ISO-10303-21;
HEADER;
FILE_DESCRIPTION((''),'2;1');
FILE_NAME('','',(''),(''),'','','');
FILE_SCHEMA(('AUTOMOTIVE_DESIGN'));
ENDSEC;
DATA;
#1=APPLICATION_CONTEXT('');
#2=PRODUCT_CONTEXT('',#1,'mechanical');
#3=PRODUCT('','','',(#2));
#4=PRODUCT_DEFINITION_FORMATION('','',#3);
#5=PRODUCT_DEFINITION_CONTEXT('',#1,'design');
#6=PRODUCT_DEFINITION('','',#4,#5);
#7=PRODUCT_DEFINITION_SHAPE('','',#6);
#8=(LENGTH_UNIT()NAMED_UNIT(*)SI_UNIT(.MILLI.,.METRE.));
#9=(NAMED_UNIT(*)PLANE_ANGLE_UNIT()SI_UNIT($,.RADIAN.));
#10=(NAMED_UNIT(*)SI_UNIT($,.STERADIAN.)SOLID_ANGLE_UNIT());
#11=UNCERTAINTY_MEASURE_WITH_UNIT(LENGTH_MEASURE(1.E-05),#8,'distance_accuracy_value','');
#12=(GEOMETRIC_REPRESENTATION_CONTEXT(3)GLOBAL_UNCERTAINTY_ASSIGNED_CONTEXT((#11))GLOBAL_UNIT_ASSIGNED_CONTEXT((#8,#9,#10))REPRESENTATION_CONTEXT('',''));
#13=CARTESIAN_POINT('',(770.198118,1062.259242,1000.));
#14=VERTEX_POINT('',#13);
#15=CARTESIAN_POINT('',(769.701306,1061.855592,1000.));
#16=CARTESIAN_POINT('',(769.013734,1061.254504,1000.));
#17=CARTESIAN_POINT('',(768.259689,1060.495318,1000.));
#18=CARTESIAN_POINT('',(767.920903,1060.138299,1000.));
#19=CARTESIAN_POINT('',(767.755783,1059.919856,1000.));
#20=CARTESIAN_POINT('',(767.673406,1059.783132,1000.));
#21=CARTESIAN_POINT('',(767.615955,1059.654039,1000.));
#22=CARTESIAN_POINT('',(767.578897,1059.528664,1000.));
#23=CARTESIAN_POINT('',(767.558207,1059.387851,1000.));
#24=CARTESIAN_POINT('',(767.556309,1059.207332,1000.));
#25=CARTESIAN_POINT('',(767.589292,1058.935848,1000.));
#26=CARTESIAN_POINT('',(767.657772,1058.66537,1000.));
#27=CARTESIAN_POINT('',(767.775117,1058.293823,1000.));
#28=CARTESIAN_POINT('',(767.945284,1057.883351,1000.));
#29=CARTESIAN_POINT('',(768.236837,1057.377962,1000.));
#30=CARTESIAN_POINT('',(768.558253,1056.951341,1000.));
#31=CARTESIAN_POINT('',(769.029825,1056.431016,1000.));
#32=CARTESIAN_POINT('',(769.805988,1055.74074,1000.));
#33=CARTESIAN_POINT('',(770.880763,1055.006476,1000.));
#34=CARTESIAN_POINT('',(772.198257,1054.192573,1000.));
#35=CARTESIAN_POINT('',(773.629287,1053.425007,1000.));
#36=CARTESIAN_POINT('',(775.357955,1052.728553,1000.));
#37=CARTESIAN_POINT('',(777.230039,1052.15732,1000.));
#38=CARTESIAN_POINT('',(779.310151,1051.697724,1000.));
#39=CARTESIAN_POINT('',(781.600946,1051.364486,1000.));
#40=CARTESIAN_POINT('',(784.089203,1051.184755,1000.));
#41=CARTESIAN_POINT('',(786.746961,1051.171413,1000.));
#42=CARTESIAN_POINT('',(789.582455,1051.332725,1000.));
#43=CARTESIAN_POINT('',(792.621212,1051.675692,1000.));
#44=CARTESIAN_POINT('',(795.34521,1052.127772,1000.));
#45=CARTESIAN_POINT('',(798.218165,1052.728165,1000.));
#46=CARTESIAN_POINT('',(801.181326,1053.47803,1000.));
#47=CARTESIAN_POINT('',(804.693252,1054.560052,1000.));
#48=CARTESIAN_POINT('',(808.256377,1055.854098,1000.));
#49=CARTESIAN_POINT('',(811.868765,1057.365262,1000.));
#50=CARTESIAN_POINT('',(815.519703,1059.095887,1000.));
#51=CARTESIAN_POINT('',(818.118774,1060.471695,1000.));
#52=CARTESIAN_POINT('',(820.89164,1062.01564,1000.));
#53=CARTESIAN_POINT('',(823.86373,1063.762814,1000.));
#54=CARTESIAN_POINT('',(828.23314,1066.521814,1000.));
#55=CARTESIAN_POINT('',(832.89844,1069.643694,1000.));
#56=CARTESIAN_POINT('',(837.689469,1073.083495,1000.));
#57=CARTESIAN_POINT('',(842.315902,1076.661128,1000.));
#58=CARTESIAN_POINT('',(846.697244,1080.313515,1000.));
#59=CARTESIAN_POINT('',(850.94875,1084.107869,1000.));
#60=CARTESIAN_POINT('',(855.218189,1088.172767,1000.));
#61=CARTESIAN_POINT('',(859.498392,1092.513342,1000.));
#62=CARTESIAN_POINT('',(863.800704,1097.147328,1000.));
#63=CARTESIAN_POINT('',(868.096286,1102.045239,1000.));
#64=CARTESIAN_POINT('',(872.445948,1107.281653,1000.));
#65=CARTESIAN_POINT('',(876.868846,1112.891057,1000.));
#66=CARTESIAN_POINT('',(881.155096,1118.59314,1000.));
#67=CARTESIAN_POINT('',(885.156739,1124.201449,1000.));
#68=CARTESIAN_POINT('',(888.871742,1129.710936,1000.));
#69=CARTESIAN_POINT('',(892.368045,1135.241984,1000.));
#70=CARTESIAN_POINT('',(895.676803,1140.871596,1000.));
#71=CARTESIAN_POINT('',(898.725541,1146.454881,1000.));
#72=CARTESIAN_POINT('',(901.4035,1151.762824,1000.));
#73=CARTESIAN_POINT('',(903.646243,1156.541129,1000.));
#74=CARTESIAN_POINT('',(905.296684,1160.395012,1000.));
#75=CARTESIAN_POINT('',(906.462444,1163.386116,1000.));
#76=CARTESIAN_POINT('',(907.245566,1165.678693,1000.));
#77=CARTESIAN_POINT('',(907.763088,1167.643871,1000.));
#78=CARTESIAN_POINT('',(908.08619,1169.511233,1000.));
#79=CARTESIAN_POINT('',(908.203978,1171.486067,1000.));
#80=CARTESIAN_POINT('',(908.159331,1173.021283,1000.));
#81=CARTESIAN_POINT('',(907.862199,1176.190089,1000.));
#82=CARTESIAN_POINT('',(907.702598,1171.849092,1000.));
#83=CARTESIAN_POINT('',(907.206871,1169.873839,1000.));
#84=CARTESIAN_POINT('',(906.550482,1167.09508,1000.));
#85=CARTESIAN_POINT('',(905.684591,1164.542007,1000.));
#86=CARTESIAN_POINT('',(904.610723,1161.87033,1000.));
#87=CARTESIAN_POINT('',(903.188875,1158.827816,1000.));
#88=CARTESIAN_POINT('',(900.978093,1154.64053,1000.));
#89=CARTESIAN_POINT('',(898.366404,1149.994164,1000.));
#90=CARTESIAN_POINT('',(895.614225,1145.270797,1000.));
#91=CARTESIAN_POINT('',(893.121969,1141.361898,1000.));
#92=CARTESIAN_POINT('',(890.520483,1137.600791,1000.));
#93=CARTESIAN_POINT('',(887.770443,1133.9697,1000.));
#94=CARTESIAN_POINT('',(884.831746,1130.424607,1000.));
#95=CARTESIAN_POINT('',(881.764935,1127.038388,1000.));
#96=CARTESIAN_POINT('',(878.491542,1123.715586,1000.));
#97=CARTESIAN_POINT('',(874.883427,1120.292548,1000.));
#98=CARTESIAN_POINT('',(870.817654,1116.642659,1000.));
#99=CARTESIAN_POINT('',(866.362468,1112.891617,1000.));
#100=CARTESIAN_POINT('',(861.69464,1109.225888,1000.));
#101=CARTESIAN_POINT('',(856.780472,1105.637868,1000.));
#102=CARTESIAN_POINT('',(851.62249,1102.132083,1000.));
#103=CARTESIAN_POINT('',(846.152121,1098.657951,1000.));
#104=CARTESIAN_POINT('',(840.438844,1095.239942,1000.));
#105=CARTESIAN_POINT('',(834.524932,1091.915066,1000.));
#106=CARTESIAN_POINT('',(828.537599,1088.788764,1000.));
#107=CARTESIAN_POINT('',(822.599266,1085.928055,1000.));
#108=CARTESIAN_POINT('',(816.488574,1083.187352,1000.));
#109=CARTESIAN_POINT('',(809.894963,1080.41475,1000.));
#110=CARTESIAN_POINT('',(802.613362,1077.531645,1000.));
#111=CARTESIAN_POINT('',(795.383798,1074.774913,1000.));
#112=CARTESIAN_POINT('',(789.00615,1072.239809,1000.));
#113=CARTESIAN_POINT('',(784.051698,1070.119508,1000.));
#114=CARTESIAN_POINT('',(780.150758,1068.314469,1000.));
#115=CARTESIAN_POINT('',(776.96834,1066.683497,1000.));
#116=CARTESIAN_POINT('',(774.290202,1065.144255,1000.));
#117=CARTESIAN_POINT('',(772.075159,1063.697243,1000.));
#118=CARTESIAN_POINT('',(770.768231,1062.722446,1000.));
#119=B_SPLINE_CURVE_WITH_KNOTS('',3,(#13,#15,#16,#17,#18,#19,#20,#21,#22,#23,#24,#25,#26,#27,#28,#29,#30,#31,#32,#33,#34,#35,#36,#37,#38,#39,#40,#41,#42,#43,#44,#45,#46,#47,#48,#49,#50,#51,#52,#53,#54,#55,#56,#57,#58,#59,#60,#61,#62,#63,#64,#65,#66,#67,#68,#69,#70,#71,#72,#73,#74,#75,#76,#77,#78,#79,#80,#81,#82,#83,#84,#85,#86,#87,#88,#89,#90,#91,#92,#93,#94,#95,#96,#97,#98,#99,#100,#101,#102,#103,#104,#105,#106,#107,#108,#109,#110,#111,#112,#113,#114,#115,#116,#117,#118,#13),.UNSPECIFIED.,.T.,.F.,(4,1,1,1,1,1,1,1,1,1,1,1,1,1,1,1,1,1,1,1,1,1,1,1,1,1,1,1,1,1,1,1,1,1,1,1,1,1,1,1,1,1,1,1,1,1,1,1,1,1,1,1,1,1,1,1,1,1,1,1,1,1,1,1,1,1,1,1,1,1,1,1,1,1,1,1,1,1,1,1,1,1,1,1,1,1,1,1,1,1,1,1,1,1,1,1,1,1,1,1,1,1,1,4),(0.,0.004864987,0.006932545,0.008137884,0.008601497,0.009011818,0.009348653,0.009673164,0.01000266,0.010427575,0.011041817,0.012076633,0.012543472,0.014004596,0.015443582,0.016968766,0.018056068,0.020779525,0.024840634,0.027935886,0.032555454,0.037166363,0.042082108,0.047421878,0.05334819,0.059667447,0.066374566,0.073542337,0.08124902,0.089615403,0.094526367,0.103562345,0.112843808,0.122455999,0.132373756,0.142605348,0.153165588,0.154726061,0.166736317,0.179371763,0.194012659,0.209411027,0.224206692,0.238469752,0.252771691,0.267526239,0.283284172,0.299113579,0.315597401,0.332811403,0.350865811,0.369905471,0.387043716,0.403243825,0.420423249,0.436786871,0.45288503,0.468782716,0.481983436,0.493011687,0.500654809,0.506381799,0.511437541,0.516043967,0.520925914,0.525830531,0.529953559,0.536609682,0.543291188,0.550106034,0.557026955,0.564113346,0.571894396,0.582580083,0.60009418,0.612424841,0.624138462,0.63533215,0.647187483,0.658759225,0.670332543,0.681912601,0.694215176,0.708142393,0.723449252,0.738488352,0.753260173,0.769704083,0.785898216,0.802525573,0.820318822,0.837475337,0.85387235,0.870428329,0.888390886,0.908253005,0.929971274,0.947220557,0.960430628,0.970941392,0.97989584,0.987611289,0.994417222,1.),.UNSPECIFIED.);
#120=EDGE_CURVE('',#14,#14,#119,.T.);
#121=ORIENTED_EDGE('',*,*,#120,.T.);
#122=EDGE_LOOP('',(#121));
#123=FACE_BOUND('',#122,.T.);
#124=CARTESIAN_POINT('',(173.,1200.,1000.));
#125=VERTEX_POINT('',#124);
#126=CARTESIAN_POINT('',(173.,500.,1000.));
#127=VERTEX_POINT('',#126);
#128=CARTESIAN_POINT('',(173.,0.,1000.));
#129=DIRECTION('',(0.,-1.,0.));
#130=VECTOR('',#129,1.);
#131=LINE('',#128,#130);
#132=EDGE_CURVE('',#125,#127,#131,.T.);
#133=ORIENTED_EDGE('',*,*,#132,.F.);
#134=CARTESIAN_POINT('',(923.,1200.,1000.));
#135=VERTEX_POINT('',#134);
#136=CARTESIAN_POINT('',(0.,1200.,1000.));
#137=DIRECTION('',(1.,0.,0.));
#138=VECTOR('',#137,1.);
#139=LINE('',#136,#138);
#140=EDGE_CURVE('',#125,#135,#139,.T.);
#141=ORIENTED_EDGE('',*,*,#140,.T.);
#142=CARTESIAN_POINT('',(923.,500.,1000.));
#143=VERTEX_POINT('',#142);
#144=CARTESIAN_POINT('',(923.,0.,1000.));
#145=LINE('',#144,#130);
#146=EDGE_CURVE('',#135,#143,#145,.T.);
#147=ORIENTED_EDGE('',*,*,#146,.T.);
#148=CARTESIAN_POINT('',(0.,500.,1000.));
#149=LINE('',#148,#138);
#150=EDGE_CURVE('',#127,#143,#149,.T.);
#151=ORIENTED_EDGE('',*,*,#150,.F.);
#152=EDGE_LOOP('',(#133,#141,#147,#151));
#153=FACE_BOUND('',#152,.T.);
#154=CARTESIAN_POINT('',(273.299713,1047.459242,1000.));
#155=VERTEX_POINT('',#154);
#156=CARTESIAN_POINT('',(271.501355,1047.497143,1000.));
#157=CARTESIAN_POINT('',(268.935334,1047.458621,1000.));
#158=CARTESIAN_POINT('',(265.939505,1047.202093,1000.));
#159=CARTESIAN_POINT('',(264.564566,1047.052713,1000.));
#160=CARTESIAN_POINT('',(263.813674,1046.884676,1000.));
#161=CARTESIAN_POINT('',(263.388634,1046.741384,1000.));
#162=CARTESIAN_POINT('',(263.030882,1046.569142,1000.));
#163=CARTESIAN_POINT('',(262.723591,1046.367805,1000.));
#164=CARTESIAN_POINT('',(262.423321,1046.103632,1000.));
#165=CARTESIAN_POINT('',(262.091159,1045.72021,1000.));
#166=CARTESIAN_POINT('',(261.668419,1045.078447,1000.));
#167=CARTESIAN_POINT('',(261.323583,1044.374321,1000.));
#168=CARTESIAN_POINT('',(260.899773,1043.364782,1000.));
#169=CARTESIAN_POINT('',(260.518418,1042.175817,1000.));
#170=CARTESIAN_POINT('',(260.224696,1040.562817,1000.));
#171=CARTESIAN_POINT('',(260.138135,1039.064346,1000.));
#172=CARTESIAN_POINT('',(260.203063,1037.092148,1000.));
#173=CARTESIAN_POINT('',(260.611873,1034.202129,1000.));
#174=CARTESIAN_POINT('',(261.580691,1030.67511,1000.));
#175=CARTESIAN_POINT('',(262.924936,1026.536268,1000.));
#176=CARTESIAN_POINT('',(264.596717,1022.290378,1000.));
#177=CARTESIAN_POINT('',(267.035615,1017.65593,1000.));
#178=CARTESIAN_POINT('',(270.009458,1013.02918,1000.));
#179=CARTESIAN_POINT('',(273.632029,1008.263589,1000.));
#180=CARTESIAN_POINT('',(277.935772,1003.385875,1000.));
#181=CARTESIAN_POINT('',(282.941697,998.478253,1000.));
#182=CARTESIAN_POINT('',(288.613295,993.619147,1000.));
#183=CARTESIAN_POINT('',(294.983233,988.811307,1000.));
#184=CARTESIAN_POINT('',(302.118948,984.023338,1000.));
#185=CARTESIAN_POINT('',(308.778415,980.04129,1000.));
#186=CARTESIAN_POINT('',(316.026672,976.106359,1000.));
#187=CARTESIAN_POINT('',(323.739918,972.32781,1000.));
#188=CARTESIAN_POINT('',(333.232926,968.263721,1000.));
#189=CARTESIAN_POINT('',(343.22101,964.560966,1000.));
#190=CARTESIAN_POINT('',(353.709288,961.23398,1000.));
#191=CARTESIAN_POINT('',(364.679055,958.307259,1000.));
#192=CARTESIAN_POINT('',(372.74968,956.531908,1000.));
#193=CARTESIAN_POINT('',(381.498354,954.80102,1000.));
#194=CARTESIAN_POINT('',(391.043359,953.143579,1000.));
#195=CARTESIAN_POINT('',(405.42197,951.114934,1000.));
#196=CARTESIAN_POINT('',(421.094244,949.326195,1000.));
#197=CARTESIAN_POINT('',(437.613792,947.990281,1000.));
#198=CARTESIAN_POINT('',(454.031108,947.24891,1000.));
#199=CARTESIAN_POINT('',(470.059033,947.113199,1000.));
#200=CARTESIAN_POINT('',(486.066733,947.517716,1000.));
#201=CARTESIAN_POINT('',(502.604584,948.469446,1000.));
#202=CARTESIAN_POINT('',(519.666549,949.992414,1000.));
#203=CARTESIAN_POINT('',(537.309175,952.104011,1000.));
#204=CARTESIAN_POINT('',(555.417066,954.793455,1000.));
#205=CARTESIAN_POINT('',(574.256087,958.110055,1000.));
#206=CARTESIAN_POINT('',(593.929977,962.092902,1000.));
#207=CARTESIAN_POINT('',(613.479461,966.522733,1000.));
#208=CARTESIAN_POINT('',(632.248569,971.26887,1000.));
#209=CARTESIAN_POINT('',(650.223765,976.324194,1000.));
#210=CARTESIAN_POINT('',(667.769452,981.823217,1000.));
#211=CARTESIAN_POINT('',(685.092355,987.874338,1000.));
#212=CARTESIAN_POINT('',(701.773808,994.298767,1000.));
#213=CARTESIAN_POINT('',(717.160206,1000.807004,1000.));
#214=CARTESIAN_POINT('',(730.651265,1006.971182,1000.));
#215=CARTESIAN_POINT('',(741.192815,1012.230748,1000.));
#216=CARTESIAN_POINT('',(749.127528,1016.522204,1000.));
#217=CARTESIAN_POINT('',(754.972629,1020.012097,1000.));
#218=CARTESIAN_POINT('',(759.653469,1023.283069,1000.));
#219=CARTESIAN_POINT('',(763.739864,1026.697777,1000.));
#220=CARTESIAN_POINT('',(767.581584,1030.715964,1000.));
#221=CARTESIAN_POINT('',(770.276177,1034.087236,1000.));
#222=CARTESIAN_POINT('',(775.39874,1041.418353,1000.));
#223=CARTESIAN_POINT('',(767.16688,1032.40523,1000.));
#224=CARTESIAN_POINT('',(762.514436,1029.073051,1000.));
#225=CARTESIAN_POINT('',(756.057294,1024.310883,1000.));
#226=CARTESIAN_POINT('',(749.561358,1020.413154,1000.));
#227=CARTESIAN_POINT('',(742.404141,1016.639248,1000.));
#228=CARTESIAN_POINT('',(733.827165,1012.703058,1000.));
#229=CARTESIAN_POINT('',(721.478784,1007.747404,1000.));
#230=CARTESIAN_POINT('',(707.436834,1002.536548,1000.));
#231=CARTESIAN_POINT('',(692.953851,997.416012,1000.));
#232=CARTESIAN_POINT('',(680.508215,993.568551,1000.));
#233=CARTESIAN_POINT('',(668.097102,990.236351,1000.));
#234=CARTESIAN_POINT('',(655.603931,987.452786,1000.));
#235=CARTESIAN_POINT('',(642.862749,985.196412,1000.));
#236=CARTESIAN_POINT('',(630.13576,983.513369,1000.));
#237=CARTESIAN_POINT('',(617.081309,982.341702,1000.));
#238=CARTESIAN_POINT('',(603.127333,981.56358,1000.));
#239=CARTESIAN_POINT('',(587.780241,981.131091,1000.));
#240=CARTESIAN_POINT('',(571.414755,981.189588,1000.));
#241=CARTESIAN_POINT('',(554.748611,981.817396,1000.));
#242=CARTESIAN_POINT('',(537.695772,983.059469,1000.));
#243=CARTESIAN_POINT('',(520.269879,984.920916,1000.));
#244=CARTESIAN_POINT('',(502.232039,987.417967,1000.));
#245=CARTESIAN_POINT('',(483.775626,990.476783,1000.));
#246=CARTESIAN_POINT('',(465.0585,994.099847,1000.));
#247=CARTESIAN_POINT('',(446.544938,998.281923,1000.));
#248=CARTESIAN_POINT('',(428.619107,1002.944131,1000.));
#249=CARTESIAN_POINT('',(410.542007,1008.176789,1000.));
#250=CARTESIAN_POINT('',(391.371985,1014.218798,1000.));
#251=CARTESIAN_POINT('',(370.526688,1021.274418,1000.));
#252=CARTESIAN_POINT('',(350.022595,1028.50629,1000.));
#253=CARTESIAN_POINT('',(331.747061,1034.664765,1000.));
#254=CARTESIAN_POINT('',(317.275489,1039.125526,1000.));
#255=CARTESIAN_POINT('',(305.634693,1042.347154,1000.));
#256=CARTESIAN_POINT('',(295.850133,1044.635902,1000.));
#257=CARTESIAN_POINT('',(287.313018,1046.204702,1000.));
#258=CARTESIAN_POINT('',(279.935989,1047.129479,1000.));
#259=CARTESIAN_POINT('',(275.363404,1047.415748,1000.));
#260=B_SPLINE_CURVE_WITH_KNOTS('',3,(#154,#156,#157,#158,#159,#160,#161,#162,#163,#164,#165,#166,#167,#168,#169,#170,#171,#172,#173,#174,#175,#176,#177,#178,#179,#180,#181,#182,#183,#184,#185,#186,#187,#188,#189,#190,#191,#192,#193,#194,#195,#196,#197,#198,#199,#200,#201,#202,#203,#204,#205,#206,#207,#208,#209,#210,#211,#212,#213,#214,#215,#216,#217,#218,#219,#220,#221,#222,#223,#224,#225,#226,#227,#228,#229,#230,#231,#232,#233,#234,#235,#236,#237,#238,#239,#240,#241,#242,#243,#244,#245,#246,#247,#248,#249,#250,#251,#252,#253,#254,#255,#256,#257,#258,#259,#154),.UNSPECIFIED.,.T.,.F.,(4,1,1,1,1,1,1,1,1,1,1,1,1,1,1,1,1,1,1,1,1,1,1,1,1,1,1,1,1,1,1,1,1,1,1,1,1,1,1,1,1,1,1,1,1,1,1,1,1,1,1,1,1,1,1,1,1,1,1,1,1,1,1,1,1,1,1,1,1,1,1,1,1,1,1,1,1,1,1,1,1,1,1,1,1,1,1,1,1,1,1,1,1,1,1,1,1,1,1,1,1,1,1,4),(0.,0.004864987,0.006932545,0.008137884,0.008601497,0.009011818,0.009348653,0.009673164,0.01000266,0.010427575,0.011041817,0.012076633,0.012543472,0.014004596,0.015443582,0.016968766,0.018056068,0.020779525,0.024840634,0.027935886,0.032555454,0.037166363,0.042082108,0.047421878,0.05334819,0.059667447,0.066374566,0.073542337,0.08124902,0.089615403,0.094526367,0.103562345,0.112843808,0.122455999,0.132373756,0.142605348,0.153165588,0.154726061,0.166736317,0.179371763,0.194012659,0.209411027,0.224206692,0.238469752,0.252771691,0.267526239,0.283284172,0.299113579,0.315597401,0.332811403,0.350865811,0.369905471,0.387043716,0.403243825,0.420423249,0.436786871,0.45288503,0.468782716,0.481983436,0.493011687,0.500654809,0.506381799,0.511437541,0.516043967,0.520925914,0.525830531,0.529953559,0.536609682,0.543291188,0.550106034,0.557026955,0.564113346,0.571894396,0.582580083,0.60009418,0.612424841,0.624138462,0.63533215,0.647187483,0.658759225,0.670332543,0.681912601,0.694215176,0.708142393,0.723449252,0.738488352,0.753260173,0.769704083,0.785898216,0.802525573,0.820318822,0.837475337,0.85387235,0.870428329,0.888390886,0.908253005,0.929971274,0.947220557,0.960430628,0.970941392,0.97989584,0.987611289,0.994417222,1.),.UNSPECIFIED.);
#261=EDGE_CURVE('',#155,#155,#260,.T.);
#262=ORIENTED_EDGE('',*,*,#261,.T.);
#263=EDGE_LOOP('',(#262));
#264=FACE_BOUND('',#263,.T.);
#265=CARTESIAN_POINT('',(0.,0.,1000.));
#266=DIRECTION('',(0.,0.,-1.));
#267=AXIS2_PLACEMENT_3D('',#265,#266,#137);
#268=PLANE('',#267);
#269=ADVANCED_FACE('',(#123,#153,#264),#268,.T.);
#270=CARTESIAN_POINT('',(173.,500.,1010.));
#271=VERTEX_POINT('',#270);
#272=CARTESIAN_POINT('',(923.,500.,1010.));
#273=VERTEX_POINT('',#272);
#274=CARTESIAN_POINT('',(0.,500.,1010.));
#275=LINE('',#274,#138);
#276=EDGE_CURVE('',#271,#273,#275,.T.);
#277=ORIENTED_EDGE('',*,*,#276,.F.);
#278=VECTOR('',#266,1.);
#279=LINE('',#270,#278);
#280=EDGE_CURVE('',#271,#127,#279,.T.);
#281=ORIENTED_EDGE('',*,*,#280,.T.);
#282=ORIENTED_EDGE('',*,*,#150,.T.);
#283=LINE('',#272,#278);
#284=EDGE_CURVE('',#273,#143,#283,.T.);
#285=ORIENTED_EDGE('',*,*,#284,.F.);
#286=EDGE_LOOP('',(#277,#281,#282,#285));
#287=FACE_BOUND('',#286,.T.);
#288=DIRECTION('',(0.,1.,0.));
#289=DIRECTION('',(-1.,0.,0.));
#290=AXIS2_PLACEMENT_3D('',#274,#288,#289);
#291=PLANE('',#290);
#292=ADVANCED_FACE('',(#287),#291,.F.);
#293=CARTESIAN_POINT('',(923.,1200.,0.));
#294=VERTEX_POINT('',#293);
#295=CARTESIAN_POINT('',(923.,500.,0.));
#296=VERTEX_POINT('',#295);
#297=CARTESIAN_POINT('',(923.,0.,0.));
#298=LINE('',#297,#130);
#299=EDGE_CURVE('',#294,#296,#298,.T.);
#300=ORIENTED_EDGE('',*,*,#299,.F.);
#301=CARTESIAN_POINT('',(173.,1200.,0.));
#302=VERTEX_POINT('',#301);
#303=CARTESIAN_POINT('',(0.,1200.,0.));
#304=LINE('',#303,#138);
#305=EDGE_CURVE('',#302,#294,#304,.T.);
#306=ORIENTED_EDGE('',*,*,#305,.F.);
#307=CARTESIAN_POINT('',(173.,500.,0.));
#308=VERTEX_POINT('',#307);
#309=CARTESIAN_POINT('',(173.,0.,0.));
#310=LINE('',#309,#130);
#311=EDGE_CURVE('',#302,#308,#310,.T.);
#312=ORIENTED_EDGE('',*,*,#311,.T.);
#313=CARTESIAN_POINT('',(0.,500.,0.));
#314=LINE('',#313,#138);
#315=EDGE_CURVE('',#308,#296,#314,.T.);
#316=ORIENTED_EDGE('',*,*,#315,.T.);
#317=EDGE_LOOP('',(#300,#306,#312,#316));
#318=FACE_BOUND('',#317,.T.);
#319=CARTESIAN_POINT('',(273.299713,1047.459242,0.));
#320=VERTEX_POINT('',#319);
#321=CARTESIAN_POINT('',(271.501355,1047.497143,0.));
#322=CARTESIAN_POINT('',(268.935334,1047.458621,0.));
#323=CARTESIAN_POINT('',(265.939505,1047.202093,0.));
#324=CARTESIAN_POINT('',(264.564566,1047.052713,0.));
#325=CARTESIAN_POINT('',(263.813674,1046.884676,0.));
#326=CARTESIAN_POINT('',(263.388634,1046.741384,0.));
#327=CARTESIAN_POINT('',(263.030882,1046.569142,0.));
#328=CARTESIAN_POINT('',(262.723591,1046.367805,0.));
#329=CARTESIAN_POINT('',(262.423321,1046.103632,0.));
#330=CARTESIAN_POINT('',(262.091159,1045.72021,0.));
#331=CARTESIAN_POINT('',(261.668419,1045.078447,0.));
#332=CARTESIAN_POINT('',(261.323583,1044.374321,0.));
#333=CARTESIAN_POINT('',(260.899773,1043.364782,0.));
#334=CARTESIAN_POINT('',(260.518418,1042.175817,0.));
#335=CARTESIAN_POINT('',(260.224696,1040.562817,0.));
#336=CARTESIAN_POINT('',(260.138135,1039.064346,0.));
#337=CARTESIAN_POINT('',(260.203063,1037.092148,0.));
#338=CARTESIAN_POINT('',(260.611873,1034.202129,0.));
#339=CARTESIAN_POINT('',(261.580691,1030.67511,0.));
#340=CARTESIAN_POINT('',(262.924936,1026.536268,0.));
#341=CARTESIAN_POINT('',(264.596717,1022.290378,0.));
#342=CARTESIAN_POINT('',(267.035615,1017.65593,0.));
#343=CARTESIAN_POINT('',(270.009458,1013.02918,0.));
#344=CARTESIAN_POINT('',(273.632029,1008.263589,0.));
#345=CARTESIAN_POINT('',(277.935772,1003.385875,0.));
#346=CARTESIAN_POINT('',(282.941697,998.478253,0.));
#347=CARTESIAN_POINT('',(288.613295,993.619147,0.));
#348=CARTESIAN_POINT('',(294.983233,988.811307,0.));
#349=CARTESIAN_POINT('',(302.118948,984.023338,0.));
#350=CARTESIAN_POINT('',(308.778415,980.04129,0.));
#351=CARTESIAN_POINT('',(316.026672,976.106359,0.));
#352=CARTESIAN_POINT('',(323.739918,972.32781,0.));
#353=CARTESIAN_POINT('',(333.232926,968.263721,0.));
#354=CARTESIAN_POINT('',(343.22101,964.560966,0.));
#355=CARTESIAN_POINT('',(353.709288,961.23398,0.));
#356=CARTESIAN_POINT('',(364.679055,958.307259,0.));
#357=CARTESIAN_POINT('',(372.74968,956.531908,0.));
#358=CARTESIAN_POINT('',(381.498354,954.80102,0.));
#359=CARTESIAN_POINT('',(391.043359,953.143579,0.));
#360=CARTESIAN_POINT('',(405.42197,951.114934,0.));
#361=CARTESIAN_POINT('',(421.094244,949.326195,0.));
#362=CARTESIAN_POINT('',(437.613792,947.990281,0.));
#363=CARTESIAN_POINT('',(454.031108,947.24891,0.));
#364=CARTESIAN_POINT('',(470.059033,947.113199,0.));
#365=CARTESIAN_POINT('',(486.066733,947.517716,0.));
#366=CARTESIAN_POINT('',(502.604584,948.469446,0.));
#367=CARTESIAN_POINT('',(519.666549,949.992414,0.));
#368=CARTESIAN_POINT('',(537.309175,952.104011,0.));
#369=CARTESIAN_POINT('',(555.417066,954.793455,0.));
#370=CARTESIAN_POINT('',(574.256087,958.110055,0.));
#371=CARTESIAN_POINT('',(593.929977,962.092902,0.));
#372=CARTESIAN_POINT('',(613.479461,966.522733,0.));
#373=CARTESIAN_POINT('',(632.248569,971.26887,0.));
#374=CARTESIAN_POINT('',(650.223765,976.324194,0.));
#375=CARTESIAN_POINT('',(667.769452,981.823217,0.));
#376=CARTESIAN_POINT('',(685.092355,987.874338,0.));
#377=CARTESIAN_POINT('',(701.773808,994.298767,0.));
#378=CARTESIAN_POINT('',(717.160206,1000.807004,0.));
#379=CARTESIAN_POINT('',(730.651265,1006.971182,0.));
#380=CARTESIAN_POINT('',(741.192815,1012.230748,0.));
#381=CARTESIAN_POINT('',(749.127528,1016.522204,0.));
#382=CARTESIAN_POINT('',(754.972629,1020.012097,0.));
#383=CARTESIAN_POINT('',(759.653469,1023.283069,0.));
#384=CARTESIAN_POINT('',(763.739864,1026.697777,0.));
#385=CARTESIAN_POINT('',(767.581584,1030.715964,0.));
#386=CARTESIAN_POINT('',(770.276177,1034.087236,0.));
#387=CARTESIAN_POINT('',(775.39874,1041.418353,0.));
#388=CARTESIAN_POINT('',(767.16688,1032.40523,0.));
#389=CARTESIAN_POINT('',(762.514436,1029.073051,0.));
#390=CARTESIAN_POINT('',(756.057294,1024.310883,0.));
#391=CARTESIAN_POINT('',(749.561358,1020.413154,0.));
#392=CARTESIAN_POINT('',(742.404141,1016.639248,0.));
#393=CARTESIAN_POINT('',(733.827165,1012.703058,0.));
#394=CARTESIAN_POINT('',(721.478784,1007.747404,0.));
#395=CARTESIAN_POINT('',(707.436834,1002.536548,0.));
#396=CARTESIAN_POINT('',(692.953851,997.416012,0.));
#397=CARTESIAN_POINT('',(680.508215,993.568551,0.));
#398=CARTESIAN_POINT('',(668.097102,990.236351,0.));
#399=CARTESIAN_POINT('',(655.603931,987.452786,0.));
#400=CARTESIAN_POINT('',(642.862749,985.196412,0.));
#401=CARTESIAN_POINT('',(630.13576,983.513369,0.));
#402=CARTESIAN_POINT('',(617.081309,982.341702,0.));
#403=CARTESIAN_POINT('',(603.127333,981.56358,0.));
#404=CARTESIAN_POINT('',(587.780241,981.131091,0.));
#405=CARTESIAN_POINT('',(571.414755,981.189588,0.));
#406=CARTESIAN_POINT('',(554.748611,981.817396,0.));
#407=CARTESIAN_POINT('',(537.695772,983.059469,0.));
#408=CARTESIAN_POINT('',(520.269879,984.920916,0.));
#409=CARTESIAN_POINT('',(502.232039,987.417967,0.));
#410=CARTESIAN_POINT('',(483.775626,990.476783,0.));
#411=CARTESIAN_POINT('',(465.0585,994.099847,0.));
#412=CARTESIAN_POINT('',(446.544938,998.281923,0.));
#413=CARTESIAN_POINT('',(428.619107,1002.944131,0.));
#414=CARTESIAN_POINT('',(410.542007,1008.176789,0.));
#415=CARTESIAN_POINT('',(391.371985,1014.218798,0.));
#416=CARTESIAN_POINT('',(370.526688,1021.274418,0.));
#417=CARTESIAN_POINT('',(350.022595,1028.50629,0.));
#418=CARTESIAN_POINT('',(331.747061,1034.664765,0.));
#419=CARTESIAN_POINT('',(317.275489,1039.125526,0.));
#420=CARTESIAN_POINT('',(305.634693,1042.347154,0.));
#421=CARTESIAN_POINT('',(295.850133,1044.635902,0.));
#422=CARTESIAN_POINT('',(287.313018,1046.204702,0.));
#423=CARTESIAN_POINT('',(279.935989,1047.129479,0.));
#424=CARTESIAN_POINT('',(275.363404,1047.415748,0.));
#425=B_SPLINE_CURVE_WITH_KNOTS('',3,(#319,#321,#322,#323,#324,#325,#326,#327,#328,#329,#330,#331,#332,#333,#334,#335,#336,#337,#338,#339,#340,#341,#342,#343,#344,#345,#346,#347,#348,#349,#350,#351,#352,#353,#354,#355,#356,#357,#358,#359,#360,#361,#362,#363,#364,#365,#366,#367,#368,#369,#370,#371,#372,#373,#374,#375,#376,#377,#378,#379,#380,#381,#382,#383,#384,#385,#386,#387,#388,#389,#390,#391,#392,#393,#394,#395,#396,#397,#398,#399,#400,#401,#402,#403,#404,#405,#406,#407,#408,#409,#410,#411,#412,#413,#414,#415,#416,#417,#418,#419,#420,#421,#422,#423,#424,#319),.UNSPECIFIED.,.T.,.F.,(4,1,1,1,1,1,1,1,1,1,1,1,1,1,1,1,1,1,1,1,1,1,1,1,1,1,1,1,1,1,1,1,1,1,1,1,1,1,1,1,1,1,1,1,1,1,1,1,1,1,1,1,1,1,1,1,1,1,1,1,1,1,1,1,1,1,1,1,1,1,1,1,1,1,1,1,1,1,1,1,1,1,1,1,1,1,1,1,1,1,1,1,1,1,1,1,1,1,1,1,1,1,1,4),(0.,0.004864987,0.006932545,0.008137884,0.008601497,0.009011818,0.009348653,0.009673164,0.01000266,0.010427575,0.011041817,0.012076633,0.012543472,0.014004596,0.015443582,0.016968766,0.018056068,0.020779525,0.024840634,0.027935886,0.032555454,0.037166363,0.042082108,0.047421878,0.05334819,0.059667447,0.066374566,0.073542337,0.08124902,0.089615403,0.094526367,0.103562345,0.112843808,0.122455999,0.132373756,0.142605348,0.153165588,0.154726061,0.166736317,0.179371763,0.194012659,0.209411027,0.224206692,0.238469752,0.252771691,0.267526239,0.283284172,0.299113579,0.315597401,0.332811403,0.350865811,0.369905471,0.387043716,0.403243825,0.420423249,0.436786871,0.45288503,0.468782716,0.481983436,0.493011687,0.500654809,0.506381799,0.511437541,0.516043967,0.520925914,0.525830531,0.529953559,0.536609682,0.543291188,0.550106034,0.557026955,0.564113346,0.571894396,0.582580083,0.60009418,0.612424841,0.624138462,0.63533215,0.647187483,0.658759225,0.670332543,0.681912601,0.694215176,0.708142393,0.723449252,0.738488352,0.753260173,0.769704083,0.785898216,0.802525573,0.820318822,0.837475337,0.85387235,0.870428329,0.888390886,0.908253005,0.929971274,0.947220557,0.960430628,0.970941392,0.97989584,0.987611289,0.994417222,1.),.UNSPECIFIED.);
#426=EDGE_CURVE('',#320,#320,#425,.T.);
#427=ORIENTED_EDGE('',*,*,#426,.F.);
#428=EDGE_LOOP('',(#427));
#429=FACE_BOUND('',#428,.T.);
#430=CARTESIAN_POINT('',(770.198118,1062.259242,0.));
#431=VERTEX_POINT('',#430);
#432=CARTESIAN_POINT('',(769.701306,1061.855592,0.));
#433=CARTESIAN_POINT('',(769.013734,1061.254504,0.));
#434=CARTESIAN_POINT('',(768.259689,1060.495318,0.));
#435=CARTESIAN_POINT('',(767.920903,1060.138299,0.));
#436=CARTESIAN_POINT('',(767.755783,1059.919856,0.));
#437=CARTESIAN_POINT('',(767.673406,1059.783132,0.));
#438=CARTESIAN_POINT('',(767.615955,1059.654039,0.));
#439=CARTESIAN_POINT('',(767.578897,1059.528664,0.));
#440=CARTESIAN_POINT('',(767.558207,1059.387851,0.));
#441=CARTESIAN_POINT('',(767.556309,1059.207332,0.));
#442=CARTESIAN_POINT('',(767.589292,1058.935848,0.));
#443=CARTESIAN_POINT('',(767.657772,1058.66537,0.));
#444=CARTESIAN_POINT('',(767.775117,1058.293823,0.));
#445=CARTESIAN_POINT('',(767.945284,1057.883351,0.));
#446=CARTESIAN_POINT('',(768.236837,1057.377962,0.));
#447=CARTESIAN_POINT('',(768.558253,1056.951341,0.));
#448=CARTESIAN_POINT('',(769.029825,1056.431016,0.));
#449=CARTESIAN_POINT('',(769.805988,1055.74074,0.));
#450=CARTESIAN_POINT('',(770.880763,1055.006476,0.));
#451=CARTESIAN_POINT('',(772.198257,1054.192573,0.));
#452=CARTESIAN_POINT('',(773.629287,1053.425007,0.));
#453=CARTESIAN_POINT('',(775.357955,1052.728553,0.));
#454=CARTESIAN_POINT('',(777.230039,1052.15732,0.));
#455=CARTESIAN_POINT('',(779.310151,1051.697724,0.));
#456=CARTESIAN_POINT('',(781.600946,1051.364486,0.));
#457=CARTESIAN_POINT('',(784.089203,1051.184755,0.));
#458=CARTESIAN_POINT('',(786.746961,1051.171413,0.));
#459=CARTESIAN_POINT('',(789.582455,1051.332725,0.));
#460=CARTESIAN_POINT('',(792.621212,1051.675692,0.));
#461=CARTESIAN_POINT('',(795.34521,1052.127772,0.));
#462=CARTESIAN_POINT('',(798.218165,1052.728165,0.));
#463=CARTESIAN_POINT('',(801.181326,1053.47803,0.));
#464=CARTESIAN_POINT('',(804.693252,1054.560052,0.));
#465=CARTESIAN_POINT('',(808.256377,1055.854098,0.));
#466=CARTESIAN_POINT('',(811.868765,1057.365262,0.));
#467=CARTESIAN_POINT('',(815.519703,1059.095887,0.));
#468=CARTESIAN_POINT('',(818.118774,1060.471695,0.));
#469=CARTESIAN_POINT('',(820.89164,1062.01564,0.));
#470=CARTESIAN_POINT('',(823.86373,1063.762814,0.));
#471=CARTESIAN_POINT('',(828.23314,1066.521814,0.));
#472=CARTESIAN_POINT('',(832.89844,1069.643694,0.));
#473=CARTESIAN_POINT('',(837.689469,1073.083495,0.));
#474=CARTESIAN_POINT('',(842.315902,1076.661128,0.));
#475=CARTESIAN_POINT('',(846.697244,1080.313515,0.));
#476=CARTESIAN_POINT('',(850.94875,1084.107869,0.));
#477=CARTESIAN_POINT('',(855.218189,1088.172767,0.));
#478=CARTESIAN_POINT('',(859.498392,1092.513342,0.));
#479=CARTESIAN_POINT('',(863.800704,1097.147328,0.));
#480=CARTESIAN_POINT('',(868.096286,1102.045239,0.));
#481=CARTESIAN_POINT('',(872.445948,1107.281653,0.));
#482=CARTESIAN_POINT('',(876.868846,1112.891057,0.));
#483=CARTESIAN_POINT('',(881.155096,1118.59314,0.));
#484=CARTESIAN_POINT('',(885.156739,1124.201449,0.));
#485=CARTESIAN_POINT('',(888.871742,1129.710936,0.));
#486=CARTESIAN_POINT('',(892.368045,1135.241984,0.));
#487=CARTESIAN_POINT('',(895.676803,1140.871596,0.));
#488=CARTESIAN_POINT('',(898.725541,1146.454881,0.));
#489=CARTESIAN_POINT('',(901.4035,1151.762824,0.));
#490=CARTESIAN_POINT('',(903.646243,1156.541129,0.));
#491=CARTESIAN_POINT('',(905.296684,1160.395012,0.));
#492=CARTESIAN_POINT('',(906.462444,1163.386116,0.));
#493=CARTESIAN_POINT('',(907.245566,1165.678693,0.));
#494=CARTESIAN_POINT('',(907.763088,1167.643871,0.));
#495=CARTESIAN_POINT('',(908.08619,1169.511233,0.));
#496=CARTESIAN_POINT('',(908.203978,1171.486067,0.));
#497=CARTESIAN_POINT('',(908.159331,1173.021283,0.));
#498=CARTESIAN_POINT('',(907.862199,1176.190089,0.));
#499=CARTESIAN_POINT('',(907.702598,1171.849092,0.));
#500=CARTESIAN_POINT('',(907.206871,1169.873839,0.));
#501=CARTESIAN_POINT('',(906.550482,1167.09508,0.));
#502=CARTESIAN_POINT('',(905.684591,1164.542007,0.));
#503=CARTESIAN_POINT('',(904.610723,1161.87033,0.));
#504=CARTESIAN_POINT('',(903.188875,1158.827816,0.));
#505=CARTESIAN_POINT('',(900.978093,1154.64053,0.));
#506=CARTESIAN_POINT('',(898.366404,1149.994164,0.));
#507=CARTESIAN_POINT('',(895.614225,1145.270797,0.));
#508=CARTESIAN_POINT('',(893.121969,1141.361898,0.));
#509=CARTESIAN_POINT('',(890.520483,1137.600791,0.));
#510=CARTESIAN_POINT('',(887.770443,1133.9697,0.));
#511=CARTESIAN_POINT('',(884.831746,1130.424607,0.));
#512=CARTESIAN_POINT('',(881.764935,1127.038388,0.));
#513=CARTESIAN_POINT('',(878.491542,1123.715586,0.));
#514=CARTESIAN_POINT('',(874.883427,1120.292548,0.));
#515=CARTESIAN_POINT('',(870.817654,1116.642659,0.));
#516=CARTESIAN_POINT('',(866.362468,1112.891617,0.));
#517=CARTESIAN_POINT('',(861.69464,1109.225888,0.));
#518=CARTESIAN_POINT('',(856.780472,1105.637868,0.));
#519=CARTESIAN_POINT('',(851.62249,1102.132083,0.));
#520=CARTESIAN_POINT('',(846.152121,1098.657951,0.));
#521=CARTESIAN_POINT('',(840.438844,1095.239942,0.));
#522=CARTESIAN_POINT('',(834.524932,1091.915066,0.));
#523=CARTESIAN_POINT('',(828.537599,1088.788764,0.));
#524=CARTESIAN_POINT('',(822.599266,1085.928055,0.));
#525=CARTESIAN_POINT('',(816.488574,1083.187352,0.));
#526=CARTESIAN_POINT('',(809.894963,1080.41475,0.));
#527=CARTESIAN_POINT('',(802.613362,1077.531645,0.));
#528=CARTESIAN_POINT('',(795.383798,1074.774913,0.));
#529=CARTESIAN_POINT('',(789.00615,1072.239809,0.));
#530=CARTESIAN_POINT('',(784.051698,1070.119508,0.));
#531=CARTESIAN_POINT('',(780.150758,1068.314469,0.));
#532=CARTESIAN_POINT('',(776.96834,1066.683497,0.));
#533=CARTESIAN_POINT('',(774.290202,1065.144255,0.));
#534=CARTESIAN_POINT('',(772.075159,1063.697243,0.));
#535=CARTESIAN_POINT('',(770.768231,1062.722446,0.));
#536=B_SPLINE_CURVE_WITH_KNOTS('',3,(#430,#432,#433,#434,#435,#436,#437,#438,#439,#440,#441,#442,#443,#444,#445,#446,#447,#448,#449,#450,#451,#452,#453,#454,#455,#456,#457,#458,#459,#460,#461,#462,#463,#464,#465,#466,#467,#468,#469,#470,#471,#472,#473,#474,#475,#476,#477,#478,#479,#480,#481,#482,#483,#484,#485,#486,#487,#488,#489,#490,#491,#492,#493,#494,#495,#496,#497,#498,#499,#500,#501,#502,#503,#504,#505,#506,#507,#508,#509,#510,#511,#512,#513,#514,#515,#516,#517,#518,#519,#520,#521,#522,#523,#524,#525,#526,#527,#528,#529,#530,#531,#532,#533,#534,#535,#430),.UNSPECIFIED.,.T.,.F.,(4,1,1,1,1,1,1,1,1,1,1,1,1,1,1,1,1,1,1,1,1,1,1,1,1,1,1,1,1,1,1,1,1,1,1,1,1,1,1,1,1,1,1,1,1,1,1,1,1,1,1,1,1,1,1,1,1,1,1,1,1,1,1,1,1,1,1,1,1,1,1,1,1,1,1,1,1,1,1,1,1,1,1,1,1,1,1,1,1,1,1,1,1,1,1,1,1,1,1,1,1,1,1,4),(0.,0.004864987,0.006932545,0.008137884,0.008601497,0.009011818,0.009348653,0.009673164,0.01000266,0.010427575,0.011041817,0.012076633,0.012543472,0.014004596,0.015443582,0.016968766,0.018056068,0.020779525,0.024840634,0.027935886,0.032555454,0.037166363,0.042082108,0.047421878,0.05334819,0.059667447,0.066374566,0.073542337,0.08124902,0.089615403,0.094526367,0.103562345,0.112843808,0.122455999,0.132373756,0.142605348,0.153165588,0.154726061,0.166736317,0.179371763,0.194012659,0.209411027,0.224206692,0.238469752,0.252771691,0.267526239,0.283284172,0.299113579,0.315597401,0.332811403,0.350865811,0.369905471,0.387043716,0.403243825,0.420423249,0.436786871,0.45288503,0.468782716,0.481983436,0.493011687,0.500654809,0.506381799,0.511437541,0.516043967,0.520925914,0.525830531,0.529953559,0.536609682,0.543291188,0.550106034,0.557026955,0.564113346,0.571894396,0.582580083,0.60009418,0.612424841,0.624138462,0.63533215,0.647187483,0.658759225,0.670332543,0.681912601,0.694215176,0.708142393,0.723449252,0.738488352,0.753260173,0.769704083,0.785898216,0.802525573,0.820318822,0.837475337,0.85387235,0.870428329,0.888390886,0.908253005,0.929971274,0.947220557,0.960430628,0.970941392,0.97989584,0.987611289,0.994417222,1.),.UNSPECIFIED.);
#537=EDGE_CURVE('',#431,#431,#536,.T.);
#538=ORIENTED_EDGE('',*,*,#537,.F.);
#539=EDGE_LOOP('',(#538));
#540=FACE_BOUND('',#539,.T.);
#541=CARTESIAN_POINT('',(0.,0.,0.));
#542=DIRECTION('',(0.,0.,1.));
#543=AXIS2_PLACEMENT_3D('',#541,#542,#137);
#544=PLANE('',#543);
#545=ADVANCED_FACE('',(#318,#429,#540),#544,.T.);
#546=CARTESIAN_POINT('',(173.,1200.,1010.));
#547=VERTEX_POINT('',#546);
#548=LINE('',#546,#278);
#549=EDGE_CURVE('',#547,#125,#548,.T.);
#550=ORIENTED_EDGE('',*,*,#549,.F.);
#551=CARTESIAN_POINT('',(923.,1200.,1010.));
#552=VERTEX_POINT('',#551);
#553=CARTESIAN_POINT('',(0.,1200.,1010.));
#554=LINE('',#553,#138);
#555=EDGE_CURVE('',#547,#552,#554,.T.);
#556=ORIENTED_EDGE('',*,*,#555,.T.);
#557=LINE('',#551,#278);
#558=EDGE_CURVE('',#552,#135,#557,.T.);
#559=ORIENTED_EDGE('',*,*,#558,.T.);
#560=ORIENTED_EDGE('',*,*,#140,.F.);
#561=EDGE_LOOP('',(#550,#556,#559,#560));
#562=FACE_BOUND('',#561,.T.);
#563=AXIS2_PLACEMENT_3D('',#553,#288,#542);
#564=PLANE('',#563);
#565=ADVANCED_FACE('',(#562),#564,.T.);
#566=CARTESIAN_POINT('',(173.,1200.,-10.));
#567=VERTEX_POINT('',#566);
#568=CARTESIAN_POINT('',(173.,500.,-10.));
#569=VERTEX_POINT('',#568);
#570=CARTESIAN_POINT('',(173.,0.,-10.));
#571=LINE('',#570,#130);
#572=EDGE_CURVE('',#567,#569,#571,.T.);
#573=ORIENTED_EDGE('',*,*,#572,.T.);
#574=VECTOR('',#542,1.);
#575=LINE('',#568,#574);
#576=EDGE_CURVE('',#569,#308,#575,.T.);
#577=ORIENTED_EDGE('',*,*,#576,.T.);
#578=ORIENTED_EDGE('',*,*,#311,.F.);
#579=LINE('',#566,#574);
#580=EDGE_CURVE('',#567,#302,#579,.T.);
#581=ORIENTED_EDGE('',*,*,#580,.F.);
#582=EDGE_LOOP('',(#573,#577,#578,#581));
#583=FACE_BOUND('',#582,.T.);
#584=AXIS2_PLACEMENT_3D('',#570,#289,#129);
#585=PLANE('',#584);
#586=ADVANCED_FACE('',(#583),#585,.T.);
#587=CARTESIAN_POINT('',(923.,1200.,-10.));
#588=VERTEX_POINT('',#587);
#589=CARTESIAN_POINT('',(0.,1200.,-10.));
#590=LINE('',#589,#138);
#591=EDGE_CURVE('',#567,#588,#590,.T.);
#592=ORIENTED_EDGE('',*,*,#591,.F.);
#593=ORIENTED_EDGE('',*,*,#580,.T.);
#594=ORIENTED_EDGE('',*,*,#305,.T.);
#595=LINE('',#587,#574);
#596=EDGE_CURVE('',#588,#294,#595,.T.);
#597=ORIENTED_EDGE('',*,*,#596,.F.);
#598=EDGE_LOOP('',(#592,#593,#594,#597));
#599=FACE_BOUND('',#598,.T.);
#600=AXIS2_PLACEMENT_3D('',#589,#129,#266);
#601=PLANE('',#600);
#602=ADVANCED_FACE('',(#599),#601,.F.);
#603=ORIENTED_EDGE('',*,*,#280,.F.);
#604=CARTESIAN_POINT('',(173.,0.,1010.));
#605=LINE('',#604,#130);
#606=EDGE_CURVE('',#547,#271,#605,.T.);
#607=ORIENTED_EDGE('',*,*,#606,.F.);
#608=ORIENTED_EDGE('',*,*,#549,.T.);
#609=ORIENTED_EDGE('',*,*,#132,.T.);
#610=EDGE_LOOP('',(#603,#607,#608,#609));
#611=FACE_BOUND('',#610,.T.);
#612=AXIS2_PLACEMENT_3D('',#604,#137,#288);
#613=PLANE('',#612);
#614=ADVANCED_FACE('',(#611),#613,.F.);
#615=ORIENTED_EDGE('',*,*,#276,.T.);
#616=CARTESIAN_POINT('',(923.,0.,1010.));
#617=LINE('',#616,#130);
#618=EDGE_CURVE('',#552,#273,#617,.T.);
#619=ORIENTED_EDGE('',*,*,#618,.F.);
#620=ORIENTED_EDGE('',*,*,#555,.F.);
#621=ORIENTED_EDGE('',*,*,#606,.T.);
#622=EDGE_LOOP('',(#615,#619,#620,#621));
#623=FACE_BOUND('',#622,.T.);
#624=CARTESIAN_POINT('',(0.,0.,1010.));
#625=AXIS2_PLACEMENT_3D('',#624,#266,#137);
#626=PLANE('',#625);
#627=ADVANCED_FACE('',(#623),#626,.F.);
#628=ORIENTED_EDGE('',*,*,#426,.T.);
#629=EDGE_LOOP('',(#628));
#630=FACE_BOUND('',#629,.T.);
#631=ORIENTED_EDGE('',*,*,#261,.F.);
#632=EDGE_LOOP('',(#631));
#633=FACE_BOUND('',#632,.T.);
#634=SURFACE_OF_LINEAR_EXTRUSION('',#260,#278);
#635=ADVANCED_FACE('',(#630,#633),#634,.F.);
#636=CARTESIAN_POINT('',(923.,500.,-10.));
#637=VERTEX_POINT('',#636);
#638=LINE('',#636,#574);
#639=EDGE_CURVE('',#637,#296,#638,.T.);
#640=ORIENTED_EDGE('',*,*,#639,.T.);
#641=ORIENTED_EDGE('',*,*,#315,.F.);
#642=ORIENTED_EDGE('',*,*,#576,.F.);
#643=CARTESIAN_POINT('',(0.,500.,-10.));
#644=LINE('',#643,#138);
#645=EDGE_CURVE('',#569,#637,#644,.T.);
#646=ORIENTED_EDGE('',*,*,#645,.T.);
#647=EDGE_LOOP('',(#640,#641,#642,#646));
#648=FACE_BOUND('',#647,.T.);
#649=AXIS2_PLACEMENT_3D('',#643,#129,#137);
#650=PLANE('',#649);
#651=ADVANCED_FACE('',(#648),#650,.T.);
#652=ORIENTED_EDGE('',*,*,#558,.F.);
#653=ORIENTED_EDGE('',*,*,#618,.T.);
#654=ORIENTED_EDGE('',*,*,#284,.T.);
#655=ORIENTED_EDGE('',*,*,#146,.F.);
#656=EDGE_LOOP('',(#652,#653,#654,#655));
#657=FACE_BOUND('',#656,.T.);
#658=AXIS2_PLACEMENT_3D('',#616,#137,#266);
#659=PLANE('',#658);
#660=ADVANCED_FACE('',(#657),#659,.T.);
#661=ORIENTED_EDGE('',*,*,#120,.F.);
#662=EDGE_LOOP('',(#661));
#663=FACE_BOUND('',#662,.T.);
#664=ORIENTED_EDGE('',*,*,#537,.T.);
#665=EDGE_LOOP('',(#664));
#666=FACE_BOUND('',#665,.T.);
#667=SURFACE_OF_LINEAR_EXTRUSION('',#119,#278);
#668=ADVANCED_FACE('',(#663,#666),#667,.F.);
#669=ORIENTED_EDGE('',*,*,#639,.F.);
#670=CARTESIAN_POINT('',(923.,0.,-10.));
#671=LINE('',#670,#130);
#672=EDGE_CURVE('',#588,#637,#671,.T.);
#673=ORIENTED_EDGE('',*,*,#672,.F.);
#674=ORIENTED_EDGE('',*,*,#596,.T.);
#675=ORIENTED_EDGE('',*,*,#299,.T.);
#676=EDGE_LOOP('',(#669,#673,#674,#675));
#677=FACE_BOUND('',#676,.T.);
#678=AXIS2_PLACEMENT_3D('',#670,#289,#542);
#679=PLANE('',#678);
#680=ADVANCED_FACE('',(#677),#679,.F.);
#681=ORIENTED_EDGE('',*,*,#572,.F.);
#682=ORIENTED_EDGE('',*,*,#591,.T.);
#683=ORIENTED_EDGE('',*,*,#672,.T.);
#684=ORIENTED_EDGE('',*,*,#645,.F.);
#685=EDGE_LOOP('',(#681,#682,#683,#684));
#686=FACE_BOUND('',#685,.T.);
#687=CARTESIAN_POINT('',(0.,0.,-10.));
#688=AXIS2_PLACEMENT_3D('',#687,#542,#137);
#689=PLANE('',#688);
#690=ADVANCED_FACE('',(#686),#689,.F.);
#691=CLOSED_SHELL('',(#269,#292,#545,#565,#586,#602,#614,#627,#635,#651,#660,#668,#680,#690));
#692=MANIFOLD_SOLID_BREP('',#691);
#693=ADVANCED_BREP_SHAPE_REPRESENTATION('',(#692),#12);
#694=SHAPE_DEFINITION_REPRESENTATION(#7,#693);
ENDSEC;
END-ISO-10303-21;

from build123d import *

# Parameters (mm, degrees)
BOSS_EXTRUDE4_DEPTH   = 1000
BOSS_EXTRUDE4_2_DEPTH = 1000
SKETCH8_4_W           = 750
SKETCH8_4_H           = 700
BOSS_EXTRUDE6_DEPTH   = 10


with BuildPart() as part:
    # Sketch8 → Boss-Extrude4 (new body)
    with BuildSketch(Plane.XY):
        with BuildLine():
            add(Edge.make_bspline(
                [(770.198118119, 1062.259241818), (769.701305806, 1061.855592471), (769.013734262, 1061.254504485), (768.259688956, 1060.495317562), (767.920903164, 1060.13829877), (767.755783208, 1059.919855836), (767.673405811, 1059.783131908), (767.615954982, 1059.654038886), (767.578896528, 1059.528663579), (767.558206739, 1059.387850727), (767.556309076, 1059.207331637), (767.589291871, 1058.935848115), (767.65777249, 1058.665370338), (767.775117144, 1058.293823157), (767.945283806, 1057.883350559), (768.236836796, 1057.377962401), (768.558253419, 1056.951341471), (769.029825075, 1056.431016217), (769.805988004, 1055.740739895), (770.88076266, 1055.006476422), (772.198257138, 1054.192573267), (773.629287204, 1053.425006603), (775.357955165, 1052.728553182), (777.230039259, 1052.157319616), (779.310151014, 1051.6977241), (781.600946098, 1051.36448618), (784.089202968, 1051.184755233), (786.746961343, 1051.171412936), (789.58245483, 1051.332724608), (792.621212362, 1051.67569195), (795.345209948, 1052.127772497), (798.218164875, 1052.728165061), (801.181325842, 1053.478029687), (804.693252311, 1054.560052353), (808.256376718, 1055.854097864), (811.86876529, 1057.36526172), (815.519702912, 1059.095887326), (818.118774276, 1060.471695327), (820.891639532, 1062.01564007), (823.86372967, 1063.762814464), (828.233140092, 1066.521813826), (832.898440303, 1069.643693971), (837.6894688, 1073.083495089), (842.31590209, 1076.661128416), (846.697243901, 1080.313515116), (850.948750037, 1084.107868545), (855.218188923, 1088.17276714), (859.498391769, 1092.513341822), (863.800703513, 1097.147328364), (868.096285963, 1102.045239462), (872.445947568, 1107.281652843), (876.868846096, 1112.891056644), (881.155095559, 1118.593140343), (885.156739262, 1124.201449227), (888.871742016, 1129.710935688), (892.368044678, 1135.241983639), (895.676803069, 1140.87159579), (898.725540685, 1146.454881231), (901.403499835, 1151.762824434), (903.646242779, 1156.54112861), (905.296684186, 1160.395012262), (906.462444001, 1163.386115624), (907.245566186, 1165.678693154), (907.763088271, 1167.643870655), (908.086189538, 1169.511233225), (908.203978227, 1171.48606669), (908.159331286, 1173.021283131), (907.862198798, 1176.190089383), (907.702598338, 1171.849092499), (907.206871232, 1169.873838922), (906.550481703, 1167.095079854), (905.684591422, 1164.542006792), (904.610723245, 1161.87033003), (903.188875156, 1158.827816131), (900.978092761, 1154.640530298), (898.366403502, 1149.994164146), (895.614224837, 1145.270796823), (893.121968904, 1141.361897745), (890.520482738, 1137.600790722), (887.770443465, 1133.969700171), (884.831746378, 1130.424607388), (881.76493491, 1127.038387691), (878.491542205, 1123.715586467), (874.883427373, 1120.292548327), (870.817653981, 1116.642658528), (866.362467881, 1112.891617458), (861.694639842, 1109.225888098), (856.780472006, 1105.637867929), (851.622489967, 1102.13208283), (846.152121196, 1098.657951427), (840.438844117, 1095.239942355), (834.524932038, 1091.915065638), (828.537598551, 1088.788764035), (822.599265657, 1085.928054508), (816.488574362, 1083.187351806), (809.894963351, 1080.414750263), (802.613361999, 1077.531645082), (795.383797513, 1074.774912576), (789.006149891, 1072.239809329), (784.051698374, 1070.119508043), (780.150758115, 1068.314468817), (776.968340282, 1066.68349692), (774.290202365, 1065.144255204), (772.075158568, 1063.697242963), (770.768231158, 1062.722446432), (770.198118119, 1062.259241818)],
                knots=[0, 0, 0, 0, 0.004864987, 0.006932545, 0.008137884, 0.008601497, 0.009011818, 0.009348653, 0.009673164, 0.01000266, 0.010427575, 0.011041817, 0.012076633, 0.012543472, 0.014004596, 0.015443582, 0.016968766, 0.018056068, 0.020779525, 0.024840634, 0.027935886, 0.032555454, 0.037166363, 0.042082108, 0.047421878, 0.05334819, 0.059667447, 0.066374566, 0.073542337, 0.08124902, 0.089615403, 0.094526367, 0.103562345, 0.112843808, 0.122455999, 0.132373756, 0.142605348, 0.153165588, 0.154726061, 0.166736317, 0.179371763, 0.194012659, 0.209411027, 0.224206692, 0.238469752, 0.252771691, 0.267526239, 0.283284172, 0.299113579, 0.315597401, 0.332811403, 0.350865811, 0.369905471, 0.387043716, 0.403243825, 0.420423249, 0.436786871, 0.45288503, 0.468782716, 0.481983436, 0.493011687, 0.500654809, 0.506381799, 0.511437541, 0.516043967, 0.520925914, 0.525830531, 0.529953559, 0.536609682, 0.543291188, 0.550106034, 0.557026955, 0.564113346, 0.571894396, 0.582580083, 0.60009418, 0.612424841, 0.624138462, 0.63533215, 0.647187483, 0.658759225, 0.670332543, 0.681912601, 0.694215176, 0.708142393, 0.723449252, 0.738488352, 0.753260173, 0.769704083, 0.785898216, 0.802525573, 0.820318822, 0.837475337, 0.85387235, 0.870428329, 0.888390886, 0.908253005, 0.929971274, 0.947220557, 0.960430628, 0.970941392, 0.97989584, 0.987611289, 0.994417222, 1, 1, 1, 1], degree=3))
        make_face()
    extrude(amount=BOSS_EXTRUDE4_DEPTH)



with BuildPart() as body_2:
    # Sketch8 → Boss-Extrude4 2 (new body)
    with BuildSketch(Plane.XY):
        with BuildLine():
            add(Edge.make_bspline(
                [(273.299712979, 1047.459241818), (271.501355354, 1047.497143149), (268.93533384, 1047.458620797), (265.939505315, 1047.202093246), (264.564566319, 1047.052713282), (263.81367442, 1046.884675527), (263.388633667, 1046.741384223), (263.03088237, 1046.569142357), (262.723591009, 1046.36780452), (262.423321423, 1046.103632175), (262.091158656, 1045.72021037), (261.66841919, 1045.078446799), (261.32358314, 1044.374320867), (260.899772696, 1043.364781846), (260.51841774, 1042.17581697), (260.224695763, 1040.562817074), (260.138135099, 1039.064345833), (260.203063122, 1037.092147862), (260.611872973, 1034.202128662), (261.580690993, 1030.675109668), (262.924936167, 1026.536268155), (264.596716896, 1022.290378011), (267.035615286, 1017.655929915), (270.009457863, 1013.029179995), (273.632028612, 1008.26358873), (277.935771872, 1003.3858749), (282.941696887, 998.478252721), (288.613294541, 993.61914713), (294.983232628, 988.811306858), (302.118947935, 984.023338085), (308.778415275, 980.041290493), (316.026672492, 976.106358714), (323.739917948, 972.327810126), (333.2329256, 968.263721419), (343.221010036, 964.560966366), (353.709288129, 961.233979805), (364.679055461, 958.30725875), (372.749680261, 956.531908465), (381.498353904, 954.801019637), (391.043359437, 953.143578783), (405.421970477, 951.114933646), (421.094244253, 949.326195386), (437.613792233, 947.99028136), (454.031107784, 947.248909838), (470.059032544, 947.113199491), (486.066732644, 947.517716421), (502.604583945, 948.469446244), (519.666548518, 949.992414415), (537.309174727, 952.104010926), (555.417065812, 954.793455282), (574.256086512, 958.110054986), (593.929976526, 962.092902134), (613.479460617, 966.522733281), (632.248568522, 971.268870235), (650.22376453, 976.32419444), (667.769452221, 981.823217486), (685.092355157, 987.874337914), (701.773807617, 994.298766739), (717.16020575, 1000.807003908), (730.651265058, 1006.971181907), (741.19281495, 1012.230748402), (749.127527913, 1016.522204009), (754.972629258, 1020.012096514), (759.653468518, 1023.283069105), (763.739864161, 1026.697776775), (767.581583798, 1030.71596392), (770.27617743, 1034.08723586), (775.398740276, 1041.418353385), (767.166879826, 1032.405229987), (762.514436029, 1029.07305067), (756.057294195, 1024.310883196), (749.56135823, 1020.413154308), (742.40414058, 1016.639248219), (733.827164964, 1012.703058476), (721.478784183, 1007.747404378), (707.436834403, 1002.536547933), (692.953850821, 997.416011511), (680.508215201, 993.568550593), (668.097102095, 990.236350557), (655.603931211, 987.452786364), (642.862749477, 985.196412287), (630.135759526, 983.513369064), (617.081308833, 982.341702283), (603.127332505, 981.563579542), (587.78024123, 981.131091145), (571.414754973, 981.189588102), (554.748610524, 981.817396349), (537.695772248, 983.059469228), (520.2698786, 984.920915856), (502.23203932, 987.417966685), (483.775625837, 990.476782521), (465.058500382, 994.099847319), (446.544938306, 998.281923252), (428.61910668, 1002.944130873), (410.54200743, 1008.176789085), (391.371985369, 1014.218797921), (370.526687937, 1021.274417907), (350.022594857, 1028.506289726), (331.747060736, 1034.664765282), (317.275489282, 1039.125525662), (305.634693026, 1042.347153894), (295.850133381, 1044.635901982), (287.313017908, 1046.204701663), (279.935988714, 1047.129478711), (275.363404042, 1047.415748446), (273.299712979, 1047.459241818)],
                knots=[0, 0, 0, 0, 0.004864987, 0.006932545, 0.008137884, 0.008601497, 0.009011818, 0.009348653, 0.009673164, 0.01000266, 0.010427575, 0.011041817, 0.012076633, 0.012543472, 0.014004596, 0.015443582, 0.016968766, 0.018056068, 0.020779525, 0.024840634, 0.027935886, 0.032555454, 0.037166363, 0.042082108, 0.047421878, 0.05334819, 0.059667447, 0.066374566, 0.073542337, 0.08124902, 0.089615403, 0.094526367, 0.103562345, 0.112843808, 0.122455999, 0.132373756, 0.142605348, 0.153165588, 0.154726061, 0.166736317, 0.179371763, 0.194012659, 0.209411027, 0.224206692, 0.238469752, 0.252771691, 0.267526239, 0.283284172, 0.299113579, 0.315597401, 0.332811403, 0.350865811, 0.369905471, 0.387043716, 0.403243825, 0.420423249, 0.436786871, 0.45288503, 0.468782716, 0.481983436, 0.493011687, 0.500654809, 0.506381799, 0.511437541, 0.516043967, 0.520925914, 0.525830531, 0.529953559, 0.536609682, 0.543291188, 0.550106034, 0.557026955, 0.564113346, 0.571894396, 0.582580083, 0.60009418, 0.612424841, 0.624138462, 0.63533215, 0.647187483, 0.658759225, 0.670332543, 0.681912601, 0.694215176, 0.708142393, 0.723449252, 0.738488352, 0.753260173, 0.769704083, 0.785898216, 0.802525573, 0.820318822, 0.837475337, 0.85387235, 0.870428329, 0.888390886, 0.908253005, 0.929971274, 0.947220557, 0.960430628, 0.970941392, 0.97989584, 0.987611289, 0.994417222, 1, 1, 1, 1], degree=3))
        make_face()
    extrude(amount=BOSS_EXTRUDE4_2_DEPTH)


with BuildPart() as part_1:
    add(part.part)

    add(body_2.part)  # Boss-Extrude6 merges body 2
    # Sketch8<4> → Boss-Extrude6 (add)
    with BuildSketch(Plane.XY):
        with Locations((548, 850)):
            Rectangle(SKETCH8_4_W, SKETCH8_4_H)
    boss_extrude6 = extrude(amount=-BOSS_EXTRUDE6_DEPTH)

    # Mirror1: Boss-Extrude6 across plane
    add(boss_extrude6.mirror(Plane.XY.offset(500)))


solid = part_1.part
